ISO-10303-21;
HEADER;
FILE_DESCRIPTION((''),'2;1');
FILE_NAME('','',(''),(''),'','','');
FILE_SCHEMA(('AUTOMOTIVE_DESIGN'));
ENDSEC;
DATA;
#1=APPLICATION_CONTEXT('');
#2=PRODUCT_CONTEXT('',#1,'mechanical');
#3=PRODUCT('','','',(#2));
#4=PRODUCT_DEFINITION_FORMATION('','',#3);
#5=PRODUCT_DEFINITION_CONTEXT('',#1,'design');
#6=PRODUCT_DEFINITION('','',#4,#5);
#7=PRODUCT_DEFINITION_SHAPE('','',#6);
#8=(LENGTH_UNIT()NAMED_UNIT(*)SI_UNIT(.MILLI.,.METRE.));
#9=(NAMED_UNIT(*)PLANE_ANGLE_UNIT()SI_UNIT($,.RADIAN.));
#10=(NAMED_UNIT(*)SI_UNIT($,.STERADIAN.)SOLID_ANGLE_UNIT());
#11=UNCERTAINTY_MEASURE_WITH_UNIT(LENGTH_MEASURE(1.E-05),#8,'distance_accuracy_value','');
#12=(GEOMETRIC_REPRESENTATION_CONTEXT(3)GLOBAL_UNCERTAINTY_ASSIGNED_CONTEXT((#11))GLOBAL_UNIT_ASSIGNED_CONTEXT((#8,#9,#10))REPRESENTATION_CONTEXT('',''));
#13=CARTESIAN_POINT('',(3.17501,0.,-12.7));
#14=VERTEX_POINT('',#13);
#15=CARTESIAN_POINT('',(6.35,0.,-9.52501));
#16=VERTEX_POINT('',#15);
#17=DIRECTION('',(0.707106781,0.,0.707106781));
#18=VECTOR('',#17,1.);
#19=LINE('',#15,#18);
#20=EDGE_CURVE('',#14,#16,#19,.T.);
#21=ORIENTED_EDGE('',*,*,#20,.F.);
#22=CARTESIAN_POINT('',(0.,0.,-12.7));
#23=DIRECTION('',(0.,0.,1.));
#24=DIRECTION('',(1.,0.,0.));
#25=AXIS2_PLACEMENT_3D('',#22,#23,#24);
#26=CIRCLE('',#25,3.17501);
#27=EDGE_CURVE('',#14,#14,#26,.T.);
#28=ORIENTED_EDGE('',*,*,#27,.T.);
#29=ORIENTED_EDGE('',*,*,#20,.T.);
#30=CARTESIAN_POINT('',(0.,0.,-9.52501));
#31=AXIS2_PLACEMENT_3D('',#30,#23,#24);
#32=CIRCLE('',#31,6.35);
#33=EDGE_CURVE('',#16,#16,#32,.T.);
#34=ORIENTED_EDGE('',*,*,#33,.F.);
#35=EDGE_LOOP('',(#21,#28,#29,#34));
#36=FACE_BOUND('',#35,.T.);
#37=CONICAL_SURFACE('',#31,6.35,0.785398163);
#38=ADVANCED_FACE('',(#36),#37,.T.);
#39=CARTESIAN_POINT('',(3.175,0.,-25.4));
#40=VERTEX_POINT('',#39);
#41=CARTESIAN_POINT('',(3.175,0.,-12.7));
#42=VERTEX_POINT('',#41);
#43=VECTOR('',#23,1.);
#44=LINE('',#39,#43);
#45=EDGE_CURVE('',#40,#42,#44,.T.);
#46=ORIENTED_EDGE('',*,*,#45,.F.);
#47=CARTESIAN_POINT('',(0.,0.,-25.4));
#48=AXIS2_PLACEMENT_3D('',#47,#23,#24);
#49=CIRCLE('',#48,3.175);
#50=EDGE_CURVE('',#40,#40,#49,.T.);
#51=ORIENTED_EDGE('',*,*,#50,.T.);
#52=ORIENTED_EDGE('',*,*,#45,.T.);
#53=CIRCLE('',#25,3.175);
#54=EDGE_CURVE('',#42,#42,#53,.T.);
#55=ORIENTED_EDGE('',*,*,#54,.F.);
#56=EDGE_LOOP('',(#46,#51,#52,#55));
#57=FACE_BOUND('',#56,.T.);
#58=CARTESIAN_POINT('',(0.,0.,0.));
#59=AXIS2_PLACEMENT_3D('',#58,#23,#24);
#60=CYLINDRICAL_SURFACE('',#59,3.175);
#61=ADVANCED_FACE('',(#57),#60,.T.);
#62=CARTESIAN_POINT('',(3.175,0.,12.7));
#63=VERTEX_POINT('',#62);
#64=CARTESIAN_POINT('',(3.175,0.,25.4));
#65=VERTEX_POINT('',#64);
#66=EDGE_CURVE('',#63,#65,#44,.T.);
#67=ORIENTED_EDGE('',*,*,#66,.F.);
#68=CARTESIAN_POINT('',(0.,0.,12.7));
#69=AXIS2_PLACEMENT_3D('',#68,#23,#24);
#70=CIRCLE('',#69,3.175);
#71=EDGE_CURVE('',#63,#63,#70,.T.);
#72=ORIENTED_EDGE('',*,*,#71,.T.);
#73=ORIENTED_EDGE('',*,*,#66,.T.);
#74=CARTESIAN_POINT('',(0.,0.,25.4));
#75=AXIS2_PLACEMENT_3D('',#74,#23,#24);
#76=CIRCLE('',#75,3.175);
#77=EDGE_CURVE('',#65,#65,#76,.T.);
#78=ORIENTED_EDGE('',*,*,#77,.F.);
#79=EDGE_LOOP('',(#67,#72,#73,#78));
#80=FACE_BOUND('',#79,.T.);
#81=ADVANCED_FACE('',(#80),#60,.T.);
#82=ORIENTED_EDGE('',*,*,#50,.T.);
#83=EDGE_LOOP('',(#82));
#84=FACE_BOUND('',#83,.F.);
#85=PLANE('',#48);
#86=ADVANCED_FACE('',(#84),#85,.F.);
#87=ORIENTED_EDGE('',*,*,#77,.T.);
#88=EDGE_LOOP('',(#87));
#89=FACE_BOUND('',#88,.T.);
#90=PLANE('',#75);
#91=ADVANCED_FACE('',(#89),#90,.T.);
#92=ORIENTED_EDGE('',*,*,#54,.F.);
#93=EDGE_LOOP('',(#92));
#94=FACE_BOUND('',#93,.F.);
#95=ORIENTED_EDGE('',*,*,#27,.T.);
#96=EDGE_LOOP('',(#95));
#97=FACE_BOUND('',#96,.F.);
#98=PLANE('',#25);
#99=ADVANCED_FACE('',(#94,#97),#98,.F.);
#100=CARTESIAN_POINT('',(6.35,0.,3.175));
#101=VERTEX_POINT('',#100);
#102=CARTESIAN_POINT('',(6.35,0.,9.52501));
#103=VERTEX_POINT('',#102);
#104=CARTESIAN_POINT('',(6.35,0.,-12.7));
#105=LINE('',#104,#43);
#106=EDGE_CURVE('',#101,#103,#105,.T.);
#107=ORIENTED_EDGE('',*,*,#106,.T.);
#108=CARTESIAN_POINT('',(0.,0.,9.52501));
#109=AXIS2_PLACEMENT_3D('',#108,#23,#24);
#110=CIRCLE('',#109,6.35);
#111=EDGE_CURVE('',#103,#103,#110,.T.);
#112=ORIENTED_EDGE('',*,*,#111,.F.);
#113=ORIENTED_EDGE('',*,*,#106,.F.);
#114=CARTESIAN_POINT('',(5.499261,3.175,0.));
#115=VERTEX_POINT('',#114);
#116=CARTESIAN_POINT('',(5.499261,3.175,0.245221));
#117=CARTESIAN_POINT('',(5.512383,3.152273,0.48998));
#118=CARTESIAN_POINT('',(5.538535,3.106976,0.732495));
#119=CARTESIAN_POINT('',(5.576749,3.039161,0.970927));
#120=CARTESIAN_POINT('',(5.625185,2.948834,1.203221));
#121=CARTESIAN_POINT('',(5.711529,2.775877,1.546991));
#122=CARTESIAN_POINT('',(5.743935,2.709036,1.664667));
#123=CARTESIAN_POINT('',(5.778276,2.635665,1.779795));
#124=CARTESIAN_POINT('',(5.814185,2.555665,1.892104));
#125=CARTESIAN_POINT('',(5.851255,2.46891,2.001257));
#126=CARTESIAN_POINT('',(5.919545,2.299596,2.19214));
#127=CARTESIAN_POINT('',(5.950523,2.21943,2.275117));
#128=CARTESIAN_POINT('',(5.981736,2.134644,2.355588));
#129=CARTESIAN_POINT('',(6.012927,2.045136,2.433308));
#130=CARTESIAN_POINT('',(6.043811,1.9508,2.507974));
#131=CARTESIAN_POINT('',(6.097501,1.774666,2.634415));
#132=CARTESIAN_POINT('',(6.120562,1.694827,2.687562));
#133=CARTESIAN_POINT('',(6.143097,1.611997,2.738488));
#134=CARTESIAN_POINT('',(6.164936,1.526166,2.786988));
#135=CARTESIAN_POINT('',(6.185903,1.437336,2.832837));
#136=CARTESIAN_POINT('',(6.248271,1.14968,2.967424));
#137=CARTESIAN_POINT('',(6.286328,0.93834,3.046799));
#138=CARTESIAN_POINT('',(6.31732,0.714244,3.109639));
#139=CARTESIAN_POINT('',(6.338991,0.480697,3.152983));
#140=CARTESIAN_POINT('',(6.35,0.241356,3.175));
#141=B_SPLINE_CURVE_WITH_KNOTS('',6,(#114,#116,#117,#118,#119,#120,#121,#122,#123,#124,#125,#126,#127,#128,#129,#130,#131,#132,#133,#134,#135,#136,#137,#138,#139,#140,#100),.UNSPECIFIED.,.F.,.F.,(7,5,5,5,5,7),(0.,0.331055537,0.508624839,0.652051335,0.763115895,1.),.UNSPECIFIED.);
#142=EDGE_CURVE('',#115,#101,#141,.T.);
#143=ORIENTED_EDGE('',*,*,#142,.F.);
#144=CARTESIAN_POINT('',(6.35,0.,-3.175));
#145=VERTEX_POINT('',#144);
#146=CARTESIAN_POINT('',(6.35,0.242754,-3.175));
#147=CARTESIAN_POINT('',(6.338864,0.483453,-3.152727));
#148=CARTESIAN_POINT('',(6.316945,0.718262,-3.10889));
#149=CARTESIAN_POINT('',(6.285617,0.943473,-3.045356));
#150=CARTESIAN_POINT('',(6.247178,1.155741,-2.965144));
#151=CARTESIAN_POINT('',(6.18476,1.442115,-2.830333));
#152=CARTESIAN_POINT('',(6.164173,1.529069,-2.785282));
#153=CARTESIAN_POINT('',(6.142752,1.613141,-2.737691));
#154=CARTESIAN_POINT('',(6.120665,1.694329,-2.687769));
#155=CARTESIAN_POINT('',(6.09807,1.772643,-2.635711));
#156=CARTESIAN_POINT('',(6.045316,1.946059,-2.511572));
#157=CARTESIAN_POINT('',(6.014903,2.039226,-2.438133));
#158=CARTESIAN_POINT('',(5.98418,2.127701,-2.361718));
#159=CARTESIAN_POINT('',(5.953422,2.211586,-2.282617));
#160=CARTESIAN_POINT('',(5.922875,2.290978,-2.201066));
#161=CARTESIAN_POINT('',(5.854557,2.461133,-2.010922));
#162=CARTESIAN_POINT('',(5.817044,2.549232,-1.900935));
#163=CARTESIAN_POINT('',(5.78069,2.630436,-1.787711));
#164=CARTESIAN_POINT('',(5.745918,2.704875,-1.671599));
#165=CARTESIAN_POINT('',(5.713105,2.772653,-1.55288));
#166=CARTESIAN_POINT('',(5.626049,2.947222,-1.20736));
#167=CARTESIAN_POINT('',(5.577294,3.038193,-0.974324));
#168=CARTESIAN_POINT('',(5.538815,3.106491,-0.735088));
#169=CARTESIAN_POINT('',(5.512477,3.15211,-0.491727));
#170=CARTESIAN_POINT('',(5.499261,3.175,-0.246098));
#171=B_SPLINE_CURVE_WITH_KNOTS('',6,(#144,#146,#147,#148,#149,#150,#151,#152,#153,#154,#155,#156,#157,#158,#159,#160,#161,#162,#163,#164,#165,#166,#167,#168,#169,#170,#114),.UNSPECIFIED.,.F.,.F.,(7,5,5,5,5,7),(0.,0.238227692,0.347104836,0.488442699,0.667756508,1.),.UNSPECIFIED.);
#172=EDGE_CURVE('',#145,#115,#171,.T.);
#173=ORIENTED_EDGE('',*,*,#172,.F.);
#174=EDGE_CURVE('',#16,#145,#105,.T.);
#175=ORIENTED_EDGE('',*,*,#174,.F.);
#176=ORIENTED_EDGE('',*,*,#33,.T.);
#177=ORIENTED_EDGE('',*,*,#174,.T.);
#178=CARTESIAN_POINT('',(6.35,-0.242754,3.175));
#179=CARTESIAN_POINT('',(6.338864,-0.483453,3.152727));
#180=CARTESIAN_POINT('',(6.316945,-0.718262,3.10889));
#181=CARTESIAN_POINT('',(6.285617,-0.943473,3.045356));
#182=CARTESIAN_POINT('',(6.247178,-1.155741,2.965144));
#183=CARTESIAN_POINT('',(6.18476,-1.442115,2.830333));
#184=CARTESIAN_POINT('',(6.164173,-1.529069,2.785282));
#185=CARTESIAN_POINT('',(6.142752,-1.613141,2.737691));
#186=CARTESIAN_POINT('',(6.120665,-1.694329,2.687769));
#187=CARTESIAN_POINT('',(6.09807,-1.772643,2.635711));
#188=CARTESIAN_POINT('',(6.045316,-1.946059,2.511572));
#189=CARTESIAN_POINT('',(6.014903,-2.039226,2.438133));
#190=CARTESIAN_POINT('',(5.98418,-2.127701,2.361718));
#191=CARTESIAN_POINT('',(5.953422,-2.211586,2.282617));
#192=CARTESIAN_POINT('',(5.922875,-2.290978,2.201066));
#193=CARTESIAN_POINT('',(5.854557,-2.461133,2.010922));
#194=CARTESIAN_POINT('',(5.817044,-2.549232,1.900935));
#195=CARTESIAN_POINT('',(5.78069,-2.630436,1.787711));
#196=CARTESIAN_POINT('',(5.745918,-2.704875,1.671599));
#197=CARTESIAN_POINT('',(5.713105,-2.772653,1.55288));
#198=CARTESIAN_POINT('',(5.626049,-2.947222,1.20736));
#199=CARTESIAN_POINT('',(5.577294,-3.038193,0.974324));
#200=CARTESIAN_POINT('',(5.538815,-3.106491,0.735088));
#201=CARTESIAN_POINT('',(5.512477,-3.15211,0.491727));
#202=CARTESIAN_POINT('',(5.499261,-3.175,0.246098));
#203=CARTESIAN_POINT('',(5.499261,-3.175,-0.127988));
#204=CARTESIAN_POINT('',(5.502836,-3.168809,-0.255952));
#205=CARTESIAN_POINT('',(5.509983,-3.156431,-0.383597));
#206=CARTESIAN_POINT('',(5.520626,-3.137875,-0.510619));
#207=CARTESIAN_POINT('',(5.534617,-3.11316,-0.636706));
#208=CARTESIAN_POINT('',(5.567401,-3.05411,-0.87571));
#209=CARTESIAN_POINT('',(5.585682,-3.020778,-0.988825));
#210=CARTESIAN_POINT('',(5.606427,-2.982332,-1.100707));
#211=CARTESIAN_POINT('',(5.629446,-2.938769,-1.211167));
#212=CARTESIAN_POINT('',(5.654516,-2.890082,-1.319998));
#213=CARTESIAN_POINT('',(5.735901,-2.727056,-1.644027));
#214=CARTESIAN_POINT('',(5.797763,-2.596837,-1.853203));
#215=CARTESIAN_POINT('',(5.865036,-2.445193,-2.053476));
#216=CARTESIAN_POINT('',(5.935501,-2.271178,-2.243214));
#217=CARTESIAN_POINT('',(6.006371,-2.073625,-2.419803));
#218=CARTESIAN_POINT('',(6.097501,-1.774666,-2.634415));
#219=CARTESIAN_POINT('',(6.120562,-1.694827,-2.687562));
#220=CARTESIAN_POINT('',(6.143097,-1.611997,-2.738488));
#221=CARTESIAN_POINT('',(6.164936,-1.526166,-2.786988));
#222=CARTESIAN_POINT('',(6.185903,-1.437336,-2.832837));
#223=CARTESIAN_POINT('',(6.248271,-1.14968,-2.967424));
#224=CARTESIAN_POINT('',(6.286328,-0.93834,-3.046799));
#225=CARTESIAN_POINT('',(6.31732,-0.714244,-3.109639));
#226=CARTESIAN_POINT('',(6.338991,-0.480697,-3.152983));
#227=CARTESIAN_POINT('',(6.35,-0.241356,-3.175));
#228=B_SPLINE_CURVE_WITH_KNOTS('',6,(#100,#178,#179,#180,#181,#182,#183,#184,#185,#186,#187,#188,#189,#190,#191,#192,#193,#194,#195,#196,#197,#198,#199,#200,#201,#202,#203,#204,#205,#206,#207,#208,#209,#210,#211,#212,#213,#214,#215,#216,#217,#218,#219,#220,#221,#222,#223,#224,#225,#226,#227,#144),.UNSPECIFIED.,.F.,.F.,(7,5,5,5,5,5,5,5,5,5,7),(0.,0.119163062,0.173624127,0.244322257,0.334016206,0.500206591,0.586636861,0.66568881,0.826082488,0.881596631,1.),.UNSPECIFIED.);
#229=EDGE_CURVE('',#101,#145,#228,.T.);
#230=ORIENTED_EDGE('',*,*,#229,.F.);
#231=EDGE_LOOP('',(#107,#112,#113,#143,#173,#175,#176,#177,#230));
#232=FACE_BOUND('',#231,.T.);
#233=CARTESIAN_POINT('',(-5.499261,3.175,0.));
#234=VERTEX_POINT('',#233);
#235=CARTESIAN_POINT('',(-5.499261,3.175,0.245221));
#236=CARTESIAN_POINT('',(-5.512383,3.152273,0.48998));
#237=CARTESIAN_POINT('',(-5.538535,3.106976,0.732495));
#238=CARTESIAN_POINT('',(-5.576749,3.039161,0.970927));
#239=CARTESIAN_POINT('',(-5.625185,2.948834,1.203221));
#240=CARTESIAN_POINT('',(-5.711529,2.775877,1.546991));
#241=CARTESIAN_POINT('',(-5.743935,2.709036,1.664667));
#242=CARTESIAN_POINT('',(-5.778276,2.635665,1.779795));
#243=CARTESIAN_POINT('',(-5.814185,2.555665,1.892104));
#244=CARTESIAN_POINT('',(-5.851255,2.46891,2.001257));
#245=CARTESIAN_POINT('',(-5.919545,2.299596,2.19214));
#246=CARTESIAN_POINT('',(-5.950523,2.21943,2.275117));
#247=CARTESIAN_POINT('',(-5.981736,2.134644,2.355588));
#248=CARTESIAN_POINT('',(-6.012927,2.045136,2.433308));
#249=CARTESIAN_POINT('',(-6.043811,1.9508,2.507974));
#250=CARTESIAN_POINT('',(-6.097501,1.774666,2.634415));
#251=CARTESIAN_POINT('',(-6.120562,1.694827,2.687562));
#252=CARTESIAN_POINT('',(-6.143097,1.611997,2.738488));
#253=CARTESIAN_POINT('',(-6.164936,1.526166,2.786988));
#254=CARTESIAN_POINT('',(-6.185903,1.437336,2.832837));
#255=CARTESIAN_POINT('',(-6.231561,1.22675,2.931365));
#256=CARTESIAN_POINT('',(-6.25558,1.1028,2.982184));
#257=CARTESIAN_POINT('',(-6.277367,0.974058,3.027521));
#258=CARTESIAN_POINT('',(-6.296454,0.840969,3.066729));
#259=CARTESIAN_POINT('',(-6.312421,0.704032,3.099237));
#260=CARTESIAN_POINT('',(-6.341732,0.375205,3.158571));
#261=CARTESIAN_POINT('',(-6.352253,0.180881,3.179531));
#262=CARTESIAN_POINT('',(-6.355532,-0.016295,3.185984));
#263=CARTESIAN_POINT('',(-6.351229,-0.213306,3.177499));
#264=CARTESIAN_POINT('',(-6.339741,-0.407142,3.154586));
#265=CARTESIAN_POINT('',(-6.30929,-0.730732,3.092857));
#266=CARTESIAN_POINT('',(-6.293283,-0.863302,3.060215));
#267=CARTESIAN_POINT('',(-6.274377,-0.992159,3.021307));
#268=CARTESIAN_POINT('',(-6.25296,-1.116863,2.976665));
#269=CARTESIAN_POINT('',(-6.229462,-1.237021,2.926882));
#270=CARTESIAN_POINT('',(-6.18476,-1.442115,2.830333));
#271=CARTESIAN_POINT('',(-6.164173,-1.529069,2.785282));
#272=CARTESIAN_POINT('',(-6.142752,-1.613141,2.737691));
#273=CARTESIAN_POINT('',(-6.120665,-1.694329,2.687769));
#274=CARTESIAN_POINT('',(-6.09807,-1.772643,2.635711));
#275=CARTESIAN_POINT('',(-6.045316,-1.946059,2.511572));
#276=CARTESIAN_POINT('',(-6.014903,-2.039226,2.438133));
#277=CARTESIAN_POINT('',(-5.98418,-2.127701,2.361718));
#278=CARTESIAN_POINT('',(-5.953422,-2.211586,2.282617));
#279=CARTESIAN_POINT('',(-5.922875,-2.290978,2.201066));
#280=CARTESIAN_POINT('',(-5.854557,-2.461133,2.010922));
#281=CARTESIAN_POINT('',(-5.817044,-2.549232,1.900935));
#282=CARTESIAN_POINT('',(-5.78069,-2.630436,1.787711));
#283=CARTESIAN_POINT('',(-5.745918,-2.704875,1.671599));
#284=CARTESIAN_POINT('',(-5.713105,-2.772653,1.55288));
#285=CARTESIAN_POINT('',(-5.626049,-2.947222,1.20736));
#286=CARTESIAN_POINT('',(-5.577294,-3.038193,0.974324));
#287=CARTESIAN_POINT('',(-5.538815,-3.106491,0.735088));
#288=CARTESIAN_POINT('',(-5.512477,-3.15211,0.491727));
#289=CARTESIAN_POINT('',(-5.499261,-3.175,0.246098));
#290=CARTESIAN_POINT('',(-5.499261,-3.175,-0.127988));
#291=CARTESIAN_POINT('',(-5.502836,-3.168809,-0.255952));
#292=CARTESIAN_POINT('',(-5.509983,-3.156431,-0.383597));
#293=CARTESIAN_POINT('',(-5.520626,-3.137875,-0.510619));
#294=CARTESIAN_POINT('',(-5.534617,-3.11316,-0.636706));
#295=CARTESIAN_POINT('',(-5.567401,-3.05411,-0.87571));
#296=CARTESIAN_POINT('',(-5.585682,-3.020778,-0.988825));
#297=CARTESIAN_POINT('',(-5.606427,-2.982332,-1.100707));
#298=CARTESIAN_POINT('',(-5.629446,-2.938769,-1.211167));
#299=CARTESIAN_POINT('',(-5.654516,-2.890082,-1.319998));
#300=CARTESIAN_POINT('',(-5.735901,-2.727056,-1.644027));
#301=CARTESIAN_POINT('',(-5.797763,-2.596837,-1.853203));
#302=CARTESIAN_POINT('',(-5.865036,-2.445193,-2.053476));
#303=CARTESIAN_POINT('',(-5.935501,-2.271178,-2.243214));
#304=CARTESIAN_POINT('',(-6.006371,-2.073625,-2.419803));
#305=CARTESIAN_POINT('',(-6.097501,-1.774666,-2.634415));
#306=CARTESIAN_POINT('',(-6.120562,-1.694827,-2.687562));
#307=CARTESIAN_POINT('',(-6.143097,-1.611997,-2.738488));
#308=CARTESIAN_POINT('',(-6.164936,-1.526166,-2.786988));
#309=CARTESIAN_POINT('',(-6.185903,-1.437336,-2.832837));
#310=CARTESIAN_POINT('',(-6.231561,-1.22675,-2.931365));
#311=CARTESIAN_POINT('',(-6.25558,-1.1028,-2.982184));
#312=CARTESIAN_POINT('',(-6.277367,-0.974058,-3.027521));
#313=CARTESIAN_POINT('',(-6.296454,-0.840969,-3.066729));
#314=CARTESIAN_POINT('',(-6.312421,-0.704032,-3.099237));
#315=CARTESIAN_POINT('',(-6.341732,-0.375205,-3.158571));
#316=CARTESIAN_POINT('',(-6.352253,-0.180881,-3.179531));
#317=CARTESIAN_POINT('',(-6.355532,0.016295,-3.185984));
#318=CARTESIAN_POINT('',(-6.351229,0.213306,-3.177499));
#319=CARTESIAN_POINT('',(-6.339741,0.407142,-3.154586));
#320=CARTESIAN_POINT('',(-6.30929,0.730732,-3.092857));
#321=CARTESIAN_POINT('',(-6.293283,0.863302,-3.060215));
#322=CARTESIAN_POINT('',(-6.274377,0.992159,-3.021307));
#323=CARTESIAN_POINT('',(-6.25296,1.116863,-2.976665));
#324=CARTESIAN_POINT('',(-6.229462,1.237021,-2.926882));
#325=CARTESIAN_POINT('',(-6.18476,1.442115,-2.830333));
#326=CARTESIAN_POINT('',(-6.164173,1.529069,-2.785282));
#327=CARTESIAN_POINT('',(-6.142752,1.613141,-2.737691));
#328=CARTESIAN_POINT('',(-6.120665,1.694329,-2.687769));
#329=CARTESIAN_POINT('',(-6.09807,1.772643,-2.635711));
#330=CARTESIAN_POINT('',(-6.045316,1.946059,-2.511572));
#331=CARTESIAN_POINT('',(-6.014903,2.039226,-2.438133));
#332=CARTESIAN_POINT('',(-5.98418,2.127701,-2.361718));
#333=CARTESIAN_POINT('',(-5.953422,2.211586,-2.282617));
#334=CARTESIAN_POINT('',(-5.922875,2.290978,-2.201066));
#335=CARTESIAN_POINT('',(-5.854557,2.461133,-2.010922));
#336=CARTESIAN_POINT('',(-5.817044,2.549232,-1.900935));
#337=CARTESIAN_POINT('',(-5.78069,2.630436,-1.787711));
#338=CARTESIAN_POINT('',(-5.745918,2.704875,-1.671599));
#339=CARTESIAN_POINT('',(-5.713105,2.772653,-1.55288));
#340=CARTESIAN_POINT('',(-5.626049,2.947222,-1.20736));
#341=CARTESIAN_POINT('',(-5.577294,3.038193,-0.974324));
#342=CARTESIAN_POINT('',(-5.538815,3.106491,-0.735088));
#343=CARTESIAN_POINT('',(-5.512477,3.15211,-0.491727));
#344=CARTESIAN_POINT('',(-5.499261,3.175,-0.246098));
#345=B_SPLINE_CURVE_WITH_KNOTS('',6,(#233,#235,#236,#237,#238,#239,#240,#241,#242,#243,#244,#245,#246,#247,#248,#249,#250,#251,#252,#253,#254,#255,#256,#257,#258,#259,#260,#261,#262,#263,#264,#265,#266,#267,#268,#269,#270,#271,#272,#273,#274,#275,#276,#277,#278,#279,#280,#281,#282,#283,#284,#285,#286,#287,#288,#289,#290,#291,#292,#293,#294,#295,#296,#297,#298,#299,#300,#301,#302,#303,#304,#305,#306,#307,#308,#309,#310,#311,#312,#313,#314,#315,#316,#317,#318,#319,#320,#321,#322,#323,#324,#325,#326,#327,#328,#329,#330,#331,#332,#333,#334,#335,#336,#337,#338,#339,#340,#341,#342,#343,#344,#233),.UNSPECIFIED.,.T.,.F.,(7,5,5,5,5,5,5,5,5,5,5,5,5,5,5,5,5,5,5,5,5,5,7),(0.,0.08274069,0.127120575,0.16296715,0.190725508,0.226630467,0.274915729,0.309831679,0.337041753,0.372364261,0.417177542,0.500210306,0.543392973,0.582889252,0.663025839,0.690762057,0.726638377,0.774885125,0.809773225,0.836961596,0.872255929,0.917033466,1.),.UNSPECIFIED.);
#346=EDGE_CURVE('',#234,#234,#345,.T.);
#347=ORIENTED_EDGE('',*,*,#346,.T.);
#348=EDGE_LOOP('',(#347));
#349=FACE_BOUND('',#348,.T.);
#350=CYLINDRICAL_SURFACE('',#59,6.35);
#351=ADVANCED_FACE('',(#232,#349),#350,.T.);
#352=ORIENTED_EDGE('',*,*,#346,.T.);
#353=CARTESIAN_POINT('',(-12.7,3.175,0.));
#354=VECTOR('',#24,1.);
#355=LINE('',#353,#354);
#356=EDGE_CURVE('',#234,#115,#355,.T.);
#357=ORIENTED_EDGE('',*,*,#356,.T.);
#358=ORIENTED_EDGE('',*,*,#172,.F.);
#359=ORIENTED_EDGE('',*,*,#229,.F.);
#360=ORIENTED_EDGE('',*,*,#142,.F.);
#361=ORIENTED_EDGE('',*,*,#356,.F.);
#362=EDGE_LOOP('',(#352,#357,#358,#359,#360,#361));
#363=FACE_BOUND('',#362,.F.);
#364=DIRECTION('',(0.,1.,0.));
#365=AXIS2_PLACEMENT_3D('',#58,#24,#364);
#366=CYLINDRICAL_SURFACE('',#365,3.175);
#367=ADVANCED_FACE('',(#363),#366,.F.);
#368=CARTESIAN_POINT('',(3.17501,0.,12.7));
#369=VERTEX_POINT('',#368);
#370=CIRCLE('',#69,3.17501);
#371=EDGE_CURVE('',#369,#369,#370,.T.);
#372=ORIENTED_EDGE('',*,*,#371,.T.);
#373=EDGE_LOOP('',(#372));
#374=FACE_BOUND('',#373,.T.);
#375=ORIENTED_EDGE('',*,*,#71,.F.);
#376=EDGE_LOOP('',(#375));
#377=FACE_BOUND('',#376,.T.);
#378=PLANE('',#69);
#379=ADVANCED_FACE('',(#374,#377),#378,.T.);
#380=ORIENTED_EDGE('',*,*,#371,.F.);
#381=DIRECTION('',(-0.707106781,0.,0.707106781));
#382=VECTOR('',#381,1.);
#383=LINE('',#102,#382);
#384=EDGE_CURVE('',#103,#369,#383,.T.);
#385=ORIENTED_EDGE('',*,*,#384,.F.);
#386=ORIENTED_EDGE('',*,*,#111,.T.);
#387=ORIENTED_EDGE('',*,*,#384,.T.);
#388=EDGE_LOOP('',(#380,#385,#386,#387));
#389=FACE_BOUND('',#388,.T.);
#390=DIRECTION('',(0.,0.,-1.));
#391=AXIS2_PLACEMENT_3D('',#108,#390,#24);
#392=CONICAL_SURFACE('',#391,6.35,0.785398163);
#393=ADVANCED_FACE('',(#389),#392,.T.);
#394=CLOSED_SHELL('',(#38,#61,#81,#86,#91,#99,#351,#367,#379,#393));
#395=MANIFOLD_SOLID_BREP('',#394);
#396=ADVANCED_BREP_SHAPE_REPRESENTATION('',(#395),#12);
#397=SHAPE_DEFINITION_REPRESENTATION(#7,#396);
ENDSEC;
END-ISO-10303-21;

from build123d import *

# Parameters (mm, degrees)
F0_R     = 6.35
F1_DEPTH = 12.7
F2_R     = 3.175
F3_DEPTH = 25.4
F4_SIZE  = 3.17499
F5_R     = 3.175
F6_DEPTH = 12.7


# Not quite as in the source:
# - a fillet or chamfer is up to 0.001 mm smaller than in the source, because OpenCascade refuses the exact size


with BuildPart() as f1:
    # F0 (on Top) → F1 (new body, symmetric)
    with BuildSketch(Plane.XY):
        Circle(F0_R)
    extrude(amount=F1_DEPTH, both=True)

    # F2 (on Top) → F3 (join, symmetric)
    with BuildSketch(Plane.XY):
        Circle(F2_R)
    extrude(amount=F3_DEPTH, both=True)

    # F4 (size 3.175 in the source; OpenCascade refuses exactly that, so slightly less here)
    f4_edges = [f1.edges().sort_by_distance(p)[0] for p in [
        (-6.35, 0, -12.7),
        (-6.35, 0, 12.7),
    ]]
    chamfer(f4_edges, length=F4_SIZE)

    # F5 (on Right) → F6 (cut, symmetric)
    with BuildSketch(Plane.YZ):
        Circle(F5_R)
    extrude(amount=F6_DEPTH, both=True, mode=Mode.SUBTRACT)


solid = f1.part
